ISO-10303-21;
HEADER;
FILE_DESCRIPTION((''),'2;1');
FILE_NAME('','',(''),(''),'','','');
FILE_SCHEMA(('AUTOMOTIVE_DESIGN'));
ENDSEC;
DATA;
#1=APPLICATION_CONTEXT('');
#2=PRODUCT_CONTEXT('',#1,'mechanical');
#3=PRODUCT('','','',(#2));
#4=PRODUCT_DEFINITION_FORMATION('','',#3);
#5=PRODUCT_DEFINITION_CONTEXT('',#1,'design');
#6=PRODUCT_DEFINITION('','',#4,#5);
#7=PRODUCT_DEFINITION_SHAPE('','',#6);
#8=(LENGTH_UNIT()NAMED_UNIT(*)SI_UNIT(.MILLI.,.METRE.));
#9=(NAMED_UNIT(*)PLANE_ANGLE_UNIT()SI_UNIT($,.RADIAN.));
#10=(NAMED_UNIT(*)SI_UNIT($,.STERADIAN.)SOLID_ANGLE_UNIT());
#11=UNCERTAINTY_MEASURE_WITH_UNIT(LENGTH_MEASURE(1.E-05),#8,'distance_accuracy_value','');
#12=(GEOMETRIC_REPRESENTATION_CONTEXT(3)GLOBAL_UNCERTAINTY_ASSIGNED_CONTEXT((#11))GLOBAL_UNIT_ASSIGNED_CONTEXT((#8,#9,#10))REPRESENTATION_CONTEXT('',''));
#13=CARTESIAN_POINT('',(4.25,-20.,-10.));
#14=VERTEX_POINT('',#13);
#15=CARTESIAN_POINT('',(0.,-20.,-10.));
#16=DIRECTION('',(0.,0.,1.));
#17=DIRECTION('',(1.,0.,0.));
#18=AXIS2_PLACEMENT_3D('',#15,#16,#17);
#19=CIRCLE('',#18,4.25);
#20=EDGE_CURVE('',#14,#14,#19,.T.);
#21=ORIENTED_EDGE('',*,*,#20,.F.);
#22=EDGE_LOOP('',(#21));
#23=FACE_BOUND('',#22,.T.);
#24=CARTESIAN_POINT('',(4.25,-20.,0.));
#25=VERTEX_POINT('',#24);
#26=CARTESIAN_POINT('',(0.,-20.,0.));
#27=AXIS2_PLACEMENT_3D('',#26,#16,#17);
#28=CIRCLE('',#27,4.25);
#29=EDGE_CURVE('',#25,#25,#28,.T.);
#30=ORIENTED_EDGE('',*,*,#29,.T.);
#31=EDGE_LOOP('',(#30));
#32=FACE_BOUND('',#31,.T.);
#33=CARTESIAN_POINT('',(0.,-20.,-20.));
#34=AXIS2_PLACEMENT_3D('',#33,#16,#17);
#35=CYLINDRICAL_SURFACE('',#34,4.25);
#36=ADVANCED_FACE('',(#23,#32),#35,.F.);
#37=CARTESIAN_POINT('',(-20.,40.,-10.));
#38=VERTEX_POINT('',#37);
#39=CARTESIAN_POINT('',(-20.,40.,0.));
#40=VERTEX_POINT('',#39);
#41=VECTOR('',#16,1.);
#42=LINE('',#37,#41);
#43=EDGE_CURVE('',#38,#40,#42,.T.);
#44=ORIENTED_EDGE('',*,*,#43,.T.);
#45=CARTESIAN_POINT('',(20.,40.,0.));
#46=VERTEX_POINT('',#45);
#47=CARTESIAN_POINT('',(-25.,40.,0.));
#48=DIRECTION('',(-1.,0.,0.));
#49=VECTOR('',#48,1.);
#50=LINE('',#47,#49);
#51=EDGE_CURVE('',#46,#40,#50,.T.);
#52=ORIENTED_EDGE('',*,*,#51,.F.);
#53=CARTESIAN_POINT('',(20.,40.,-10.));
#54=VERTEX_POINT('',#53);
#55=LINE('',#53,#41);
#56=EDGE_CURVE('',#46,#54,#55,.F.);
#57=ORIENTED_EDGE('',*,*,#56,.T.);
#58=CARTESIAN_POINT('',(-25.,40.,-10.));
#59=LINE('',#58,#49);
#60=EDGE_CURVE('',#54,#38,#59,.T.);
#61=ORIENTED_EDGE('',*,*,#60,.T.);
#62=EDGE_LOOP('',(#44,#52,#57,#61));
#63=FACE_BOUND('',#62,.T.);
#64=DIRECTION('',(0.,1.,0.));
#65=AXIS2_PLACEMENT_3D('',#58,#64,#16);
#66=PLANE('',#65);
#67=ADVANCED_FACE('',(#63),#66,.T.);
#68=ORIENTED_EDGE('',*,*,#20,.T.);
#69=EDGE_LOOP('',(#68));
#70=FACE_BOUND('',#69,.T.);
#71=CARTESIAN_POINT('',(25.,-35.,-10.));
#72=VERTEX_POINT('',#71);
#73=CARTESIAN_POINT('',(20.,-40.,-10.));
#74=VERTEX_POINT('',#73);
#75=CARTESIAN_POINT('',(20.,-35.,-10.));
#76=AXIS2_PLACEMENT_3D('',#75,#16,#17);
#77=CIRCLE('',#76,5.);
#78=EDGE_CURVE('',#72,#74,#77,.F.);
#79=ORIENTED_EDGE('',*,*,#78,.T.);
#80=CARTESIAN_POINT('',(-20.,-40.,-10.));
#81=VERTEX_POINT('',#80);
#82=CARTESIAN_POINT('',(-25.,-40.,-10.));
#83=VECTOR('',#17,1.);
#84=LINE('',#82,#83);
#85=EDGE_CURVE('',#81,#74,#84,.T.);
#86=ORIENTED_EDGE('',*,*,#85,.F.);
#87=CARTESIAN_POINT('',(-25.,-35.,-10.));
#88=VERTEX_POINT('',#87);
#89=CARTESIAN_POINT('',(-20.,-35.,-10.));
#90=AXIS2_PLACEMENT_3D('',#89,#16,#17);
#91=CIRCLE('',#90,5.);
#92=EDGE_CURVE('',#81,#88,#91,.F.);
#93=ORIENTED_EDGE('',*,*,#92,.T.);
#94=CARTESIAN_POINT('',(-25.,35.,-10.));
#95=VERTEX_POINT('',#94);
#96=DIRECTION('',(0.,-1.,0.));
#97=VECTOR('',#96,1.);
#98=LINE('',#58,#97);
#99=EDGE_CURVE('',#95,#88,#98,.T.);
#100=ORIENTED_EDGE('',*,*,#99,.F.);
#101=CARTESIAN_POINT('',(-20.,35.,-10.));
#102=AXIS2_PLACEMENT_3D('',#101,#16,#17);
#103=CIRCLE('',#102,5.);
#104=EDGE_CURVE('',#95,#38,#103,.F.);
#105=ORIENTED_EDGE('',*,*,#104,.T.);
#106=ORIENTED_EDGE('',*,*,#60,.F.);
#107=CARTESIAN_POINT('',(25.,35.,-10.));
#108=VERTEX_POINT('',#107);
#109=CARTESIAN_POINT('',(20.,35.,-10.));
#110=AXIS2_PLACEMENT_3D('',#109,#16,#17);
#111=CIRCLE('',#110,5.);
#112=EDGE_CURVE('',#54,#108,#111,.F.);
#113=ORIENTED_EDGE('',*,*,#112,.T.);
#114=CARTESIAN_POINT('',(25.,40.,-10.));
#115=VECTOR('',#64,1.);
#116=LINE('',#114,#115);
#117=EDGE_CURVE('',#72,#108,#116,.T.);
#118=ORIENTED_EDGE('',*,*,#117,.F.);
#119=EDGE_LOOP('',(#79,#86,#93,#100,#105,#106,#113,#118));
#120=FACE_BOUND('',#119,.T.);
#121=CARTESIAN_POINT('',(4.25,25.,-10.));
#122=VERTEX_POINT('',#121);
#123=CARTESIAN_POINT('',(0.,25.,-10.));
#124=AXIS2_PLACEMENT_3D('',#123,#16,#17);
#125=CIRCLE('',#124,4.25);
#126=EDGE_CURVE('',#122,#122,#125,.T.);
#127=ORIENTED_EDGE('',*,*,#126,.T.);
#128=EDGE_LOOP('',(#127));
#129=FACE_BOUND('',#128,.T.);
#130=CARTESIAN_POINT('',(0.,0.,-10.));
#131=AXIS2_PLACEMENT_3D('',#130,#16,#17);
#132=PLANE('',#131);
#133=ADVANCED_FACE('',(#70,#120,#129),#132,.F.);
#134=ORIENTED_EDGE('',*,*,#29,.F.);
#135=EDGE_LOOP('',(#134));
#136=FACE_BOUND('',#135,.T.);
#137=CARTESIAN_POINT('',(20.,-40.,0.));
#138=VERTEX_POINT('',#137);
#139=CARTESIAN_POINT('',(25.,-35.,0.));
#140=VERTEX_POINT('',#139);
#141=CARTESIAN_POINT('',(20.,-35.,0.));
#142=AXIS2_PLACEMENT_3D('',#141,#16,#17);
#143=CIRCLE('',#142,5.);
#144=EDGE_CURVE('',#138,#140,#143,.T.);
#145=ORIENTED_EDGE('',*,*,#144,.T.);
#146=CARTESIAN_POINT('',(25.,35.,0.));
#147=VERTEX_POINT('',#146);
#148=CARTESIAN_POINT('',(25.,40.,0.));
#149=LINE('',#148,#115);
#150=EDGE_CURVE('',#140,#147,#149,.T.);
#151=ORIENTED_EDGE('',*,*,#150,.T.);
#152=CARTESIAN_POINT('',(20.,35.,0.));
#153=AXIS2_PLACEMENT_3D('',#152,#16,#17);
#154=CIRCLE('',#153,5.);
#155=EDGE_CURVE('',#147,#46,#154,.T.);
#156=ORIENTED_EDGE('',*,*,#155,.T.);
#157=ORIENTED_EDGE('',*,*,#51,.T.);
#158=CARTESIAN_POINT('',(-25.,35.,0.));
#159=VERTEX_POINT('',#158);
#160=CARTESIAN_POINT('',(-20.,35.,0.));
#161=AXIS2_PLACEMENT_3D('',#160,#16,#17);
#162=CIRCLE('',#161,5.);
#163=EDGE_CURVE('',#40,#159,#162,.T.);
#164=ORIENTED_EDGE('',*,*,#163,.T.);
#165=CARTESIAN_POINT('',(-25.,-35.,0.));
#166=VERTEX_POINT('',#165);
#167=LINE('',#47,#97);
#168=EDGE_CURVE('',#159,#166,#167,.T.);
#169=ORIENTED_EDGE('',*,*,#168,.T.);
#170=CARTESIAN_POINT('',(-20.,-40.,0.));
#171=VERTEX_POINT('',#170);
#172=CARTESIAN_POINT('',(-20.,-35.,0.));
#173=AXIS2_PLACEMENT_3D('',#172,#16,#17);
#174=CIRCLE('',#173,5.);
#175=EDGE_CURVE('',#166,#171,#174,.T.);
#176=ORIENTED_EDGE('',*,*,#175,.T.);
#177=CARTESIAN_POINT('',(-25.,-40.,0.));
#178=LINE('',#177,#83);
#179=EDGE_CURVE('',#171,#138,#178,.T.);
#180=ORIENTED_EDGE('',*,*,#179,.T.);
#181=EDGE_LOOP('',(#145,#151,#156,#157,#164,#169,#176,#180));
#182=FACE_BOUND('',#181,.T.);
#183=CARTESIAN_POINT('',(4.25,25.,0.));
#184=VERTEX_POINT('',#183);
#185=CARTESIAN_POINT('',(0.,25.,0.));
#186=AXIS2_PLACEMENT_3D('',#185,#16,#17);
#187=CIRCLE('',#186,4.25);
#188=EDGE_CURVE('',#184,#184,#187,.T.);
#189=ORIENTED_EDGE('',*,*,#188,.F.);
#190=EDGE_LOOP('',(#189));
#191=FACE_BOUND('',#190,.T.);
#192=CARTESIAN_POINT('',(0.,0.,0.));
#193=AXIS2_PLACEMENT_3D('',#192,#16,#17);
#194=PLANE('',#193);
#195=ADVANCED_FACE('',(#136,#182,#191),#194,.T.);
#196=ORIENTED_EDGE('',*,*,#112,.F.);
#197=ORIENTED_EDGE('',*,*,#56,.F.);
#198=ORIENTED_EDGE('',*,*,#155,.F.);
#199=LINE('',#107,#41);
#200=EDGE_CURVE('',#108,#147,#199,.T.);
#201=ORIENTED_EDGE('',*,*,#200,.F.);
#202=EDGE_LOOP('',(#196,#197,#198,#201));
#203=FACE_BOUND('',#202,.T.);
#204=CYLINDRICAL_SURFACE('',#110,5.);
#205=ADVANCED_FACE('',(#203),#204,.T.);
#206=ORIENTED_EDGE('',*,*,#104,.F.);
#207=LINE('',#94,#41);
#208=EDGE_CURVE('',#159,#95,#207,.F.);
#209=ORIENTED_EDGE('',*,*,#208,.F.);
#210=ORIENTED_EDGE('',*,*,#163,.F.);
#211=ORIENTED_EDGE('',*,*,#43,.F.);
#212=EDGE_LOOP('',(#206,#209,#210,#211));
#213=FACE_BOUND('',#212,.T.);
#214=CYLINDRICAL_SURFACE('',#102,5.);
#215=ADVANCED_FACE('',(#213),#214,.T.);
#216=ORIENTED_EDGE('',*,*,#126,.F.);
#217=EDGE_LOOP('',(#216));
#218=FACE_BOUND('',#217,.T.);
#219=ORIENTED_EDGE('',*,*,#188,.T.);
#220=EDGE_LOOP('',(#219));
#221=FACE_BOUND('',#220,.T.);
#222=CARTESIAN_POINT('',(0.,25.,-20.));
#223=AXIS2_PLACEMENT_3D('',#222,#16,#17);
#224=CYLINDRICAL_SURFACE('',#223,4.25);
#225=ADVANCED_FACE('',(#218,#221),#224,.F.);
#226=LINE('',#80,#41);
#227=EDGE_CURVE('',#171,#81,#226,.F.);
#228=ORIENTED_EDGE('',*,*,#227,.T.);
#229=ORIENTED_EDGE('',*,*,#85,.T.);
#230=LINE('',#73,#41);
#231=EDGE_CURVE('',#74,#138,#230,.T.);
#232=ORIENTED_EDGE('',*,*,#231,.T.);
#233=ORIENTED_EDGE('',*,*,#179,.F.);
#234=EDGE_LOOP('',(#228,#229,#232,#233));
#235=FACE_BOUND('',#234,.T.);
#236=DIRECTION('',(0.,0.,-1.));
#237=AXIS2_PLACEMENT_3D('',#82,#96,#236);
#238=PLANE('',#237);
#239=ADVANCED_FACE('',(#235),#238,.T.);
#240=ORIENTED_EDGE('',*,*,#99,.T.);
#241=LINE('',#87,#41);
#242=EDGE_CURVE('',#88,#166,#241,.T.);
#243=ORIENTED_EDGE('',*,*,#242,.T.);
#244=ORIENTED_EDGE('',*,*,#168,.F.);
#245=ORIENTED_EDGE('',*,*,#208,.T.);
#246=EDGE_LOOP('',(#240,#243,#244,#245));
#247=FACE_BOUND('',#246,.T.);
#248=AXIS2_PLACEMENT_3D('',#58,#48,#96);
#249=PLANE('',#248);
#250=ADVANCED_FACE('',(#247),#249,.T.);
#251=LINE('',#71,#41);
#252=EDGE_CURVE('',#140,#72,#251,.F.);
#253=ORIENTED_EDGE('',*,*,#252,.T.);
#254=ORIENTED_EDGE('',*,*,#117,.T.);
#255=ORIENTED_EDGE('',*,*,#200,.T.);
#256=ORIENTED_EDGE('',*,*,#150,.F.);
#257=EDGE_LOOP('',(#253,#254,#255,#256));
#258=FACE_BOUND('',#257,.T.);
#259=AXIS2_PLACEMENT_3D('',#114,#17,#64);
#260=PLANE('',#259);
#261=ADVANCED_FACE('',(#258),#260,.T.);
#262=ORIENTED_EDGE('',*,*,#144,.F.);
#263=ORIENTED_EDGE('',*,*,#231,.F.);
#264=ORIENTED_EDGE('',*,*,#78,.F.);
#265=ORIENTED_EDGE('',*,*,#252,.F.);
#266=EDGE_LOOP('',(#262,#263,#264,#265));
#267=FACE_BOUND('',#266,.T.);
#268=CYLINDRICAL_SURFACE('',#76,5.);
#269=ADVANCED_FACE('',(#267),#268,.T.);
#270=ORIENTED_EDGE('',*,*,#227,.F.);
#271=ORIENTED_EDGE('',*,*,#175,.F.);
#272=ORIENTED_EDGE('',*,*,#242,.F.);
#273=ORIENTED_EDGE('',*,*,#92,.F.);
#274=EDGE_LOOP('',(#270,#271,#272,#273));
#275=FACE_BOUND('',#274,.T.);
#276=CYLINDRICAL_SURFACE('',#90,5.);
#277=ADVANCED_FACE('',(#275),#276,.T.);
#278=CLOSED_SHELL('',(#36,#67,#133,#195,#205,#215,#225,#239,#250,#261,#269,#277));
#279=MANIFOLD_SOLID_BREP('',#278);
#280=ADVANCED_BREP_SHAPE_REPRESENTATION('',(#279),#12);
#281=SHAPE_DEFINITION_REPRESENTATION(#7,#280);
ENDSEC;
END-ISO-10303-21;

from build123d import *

# Parameters (mm, degrees)
IZIM1_W               = 50
IZIM1_H               = 80
TABAN_FLAN_1_DEPTH    = 10
IZIM6_R               = 4.25
KES_EKSTR_ZYON1_DEPTH = 20
RADYUS1_R             = 5


# Sheet-metal steps are written as plain solids
with BuildPart() as part:
    # Çizim1 → Taban-Flanş1 (new body)
    with BuildSketch(Plane.XY):
        Rectangle(IZIM1_W, IZIM1_H)
    extrude(amount=-TABAN_FLAN_1_DEPTH)

    # Çizim6 → Kes-Ekstrüzyon1 (cut)
    with BuildSketch(Plane.XY):
        with Locations((0, 25)):
            Circle(IZIM6_R)
        with Locations((0, -20)):
            Circle(IZIM6_R)
    extrude(amount=-KES_EKSTR_ZYON1_DEPTH, mode=Mode.SUBTRACT)

    # Radyus1
    radyus1_edges = [part.edges().sort_by_distance(p)[0] for p in [
        (25, -40, -5),
        (-25, -40, -5),
        (-25, 40, -5),
        (25, 40, -5),
    ]]
    fillet(radyus1_edges, radius=RADYUS1_R)


solid = part.part
